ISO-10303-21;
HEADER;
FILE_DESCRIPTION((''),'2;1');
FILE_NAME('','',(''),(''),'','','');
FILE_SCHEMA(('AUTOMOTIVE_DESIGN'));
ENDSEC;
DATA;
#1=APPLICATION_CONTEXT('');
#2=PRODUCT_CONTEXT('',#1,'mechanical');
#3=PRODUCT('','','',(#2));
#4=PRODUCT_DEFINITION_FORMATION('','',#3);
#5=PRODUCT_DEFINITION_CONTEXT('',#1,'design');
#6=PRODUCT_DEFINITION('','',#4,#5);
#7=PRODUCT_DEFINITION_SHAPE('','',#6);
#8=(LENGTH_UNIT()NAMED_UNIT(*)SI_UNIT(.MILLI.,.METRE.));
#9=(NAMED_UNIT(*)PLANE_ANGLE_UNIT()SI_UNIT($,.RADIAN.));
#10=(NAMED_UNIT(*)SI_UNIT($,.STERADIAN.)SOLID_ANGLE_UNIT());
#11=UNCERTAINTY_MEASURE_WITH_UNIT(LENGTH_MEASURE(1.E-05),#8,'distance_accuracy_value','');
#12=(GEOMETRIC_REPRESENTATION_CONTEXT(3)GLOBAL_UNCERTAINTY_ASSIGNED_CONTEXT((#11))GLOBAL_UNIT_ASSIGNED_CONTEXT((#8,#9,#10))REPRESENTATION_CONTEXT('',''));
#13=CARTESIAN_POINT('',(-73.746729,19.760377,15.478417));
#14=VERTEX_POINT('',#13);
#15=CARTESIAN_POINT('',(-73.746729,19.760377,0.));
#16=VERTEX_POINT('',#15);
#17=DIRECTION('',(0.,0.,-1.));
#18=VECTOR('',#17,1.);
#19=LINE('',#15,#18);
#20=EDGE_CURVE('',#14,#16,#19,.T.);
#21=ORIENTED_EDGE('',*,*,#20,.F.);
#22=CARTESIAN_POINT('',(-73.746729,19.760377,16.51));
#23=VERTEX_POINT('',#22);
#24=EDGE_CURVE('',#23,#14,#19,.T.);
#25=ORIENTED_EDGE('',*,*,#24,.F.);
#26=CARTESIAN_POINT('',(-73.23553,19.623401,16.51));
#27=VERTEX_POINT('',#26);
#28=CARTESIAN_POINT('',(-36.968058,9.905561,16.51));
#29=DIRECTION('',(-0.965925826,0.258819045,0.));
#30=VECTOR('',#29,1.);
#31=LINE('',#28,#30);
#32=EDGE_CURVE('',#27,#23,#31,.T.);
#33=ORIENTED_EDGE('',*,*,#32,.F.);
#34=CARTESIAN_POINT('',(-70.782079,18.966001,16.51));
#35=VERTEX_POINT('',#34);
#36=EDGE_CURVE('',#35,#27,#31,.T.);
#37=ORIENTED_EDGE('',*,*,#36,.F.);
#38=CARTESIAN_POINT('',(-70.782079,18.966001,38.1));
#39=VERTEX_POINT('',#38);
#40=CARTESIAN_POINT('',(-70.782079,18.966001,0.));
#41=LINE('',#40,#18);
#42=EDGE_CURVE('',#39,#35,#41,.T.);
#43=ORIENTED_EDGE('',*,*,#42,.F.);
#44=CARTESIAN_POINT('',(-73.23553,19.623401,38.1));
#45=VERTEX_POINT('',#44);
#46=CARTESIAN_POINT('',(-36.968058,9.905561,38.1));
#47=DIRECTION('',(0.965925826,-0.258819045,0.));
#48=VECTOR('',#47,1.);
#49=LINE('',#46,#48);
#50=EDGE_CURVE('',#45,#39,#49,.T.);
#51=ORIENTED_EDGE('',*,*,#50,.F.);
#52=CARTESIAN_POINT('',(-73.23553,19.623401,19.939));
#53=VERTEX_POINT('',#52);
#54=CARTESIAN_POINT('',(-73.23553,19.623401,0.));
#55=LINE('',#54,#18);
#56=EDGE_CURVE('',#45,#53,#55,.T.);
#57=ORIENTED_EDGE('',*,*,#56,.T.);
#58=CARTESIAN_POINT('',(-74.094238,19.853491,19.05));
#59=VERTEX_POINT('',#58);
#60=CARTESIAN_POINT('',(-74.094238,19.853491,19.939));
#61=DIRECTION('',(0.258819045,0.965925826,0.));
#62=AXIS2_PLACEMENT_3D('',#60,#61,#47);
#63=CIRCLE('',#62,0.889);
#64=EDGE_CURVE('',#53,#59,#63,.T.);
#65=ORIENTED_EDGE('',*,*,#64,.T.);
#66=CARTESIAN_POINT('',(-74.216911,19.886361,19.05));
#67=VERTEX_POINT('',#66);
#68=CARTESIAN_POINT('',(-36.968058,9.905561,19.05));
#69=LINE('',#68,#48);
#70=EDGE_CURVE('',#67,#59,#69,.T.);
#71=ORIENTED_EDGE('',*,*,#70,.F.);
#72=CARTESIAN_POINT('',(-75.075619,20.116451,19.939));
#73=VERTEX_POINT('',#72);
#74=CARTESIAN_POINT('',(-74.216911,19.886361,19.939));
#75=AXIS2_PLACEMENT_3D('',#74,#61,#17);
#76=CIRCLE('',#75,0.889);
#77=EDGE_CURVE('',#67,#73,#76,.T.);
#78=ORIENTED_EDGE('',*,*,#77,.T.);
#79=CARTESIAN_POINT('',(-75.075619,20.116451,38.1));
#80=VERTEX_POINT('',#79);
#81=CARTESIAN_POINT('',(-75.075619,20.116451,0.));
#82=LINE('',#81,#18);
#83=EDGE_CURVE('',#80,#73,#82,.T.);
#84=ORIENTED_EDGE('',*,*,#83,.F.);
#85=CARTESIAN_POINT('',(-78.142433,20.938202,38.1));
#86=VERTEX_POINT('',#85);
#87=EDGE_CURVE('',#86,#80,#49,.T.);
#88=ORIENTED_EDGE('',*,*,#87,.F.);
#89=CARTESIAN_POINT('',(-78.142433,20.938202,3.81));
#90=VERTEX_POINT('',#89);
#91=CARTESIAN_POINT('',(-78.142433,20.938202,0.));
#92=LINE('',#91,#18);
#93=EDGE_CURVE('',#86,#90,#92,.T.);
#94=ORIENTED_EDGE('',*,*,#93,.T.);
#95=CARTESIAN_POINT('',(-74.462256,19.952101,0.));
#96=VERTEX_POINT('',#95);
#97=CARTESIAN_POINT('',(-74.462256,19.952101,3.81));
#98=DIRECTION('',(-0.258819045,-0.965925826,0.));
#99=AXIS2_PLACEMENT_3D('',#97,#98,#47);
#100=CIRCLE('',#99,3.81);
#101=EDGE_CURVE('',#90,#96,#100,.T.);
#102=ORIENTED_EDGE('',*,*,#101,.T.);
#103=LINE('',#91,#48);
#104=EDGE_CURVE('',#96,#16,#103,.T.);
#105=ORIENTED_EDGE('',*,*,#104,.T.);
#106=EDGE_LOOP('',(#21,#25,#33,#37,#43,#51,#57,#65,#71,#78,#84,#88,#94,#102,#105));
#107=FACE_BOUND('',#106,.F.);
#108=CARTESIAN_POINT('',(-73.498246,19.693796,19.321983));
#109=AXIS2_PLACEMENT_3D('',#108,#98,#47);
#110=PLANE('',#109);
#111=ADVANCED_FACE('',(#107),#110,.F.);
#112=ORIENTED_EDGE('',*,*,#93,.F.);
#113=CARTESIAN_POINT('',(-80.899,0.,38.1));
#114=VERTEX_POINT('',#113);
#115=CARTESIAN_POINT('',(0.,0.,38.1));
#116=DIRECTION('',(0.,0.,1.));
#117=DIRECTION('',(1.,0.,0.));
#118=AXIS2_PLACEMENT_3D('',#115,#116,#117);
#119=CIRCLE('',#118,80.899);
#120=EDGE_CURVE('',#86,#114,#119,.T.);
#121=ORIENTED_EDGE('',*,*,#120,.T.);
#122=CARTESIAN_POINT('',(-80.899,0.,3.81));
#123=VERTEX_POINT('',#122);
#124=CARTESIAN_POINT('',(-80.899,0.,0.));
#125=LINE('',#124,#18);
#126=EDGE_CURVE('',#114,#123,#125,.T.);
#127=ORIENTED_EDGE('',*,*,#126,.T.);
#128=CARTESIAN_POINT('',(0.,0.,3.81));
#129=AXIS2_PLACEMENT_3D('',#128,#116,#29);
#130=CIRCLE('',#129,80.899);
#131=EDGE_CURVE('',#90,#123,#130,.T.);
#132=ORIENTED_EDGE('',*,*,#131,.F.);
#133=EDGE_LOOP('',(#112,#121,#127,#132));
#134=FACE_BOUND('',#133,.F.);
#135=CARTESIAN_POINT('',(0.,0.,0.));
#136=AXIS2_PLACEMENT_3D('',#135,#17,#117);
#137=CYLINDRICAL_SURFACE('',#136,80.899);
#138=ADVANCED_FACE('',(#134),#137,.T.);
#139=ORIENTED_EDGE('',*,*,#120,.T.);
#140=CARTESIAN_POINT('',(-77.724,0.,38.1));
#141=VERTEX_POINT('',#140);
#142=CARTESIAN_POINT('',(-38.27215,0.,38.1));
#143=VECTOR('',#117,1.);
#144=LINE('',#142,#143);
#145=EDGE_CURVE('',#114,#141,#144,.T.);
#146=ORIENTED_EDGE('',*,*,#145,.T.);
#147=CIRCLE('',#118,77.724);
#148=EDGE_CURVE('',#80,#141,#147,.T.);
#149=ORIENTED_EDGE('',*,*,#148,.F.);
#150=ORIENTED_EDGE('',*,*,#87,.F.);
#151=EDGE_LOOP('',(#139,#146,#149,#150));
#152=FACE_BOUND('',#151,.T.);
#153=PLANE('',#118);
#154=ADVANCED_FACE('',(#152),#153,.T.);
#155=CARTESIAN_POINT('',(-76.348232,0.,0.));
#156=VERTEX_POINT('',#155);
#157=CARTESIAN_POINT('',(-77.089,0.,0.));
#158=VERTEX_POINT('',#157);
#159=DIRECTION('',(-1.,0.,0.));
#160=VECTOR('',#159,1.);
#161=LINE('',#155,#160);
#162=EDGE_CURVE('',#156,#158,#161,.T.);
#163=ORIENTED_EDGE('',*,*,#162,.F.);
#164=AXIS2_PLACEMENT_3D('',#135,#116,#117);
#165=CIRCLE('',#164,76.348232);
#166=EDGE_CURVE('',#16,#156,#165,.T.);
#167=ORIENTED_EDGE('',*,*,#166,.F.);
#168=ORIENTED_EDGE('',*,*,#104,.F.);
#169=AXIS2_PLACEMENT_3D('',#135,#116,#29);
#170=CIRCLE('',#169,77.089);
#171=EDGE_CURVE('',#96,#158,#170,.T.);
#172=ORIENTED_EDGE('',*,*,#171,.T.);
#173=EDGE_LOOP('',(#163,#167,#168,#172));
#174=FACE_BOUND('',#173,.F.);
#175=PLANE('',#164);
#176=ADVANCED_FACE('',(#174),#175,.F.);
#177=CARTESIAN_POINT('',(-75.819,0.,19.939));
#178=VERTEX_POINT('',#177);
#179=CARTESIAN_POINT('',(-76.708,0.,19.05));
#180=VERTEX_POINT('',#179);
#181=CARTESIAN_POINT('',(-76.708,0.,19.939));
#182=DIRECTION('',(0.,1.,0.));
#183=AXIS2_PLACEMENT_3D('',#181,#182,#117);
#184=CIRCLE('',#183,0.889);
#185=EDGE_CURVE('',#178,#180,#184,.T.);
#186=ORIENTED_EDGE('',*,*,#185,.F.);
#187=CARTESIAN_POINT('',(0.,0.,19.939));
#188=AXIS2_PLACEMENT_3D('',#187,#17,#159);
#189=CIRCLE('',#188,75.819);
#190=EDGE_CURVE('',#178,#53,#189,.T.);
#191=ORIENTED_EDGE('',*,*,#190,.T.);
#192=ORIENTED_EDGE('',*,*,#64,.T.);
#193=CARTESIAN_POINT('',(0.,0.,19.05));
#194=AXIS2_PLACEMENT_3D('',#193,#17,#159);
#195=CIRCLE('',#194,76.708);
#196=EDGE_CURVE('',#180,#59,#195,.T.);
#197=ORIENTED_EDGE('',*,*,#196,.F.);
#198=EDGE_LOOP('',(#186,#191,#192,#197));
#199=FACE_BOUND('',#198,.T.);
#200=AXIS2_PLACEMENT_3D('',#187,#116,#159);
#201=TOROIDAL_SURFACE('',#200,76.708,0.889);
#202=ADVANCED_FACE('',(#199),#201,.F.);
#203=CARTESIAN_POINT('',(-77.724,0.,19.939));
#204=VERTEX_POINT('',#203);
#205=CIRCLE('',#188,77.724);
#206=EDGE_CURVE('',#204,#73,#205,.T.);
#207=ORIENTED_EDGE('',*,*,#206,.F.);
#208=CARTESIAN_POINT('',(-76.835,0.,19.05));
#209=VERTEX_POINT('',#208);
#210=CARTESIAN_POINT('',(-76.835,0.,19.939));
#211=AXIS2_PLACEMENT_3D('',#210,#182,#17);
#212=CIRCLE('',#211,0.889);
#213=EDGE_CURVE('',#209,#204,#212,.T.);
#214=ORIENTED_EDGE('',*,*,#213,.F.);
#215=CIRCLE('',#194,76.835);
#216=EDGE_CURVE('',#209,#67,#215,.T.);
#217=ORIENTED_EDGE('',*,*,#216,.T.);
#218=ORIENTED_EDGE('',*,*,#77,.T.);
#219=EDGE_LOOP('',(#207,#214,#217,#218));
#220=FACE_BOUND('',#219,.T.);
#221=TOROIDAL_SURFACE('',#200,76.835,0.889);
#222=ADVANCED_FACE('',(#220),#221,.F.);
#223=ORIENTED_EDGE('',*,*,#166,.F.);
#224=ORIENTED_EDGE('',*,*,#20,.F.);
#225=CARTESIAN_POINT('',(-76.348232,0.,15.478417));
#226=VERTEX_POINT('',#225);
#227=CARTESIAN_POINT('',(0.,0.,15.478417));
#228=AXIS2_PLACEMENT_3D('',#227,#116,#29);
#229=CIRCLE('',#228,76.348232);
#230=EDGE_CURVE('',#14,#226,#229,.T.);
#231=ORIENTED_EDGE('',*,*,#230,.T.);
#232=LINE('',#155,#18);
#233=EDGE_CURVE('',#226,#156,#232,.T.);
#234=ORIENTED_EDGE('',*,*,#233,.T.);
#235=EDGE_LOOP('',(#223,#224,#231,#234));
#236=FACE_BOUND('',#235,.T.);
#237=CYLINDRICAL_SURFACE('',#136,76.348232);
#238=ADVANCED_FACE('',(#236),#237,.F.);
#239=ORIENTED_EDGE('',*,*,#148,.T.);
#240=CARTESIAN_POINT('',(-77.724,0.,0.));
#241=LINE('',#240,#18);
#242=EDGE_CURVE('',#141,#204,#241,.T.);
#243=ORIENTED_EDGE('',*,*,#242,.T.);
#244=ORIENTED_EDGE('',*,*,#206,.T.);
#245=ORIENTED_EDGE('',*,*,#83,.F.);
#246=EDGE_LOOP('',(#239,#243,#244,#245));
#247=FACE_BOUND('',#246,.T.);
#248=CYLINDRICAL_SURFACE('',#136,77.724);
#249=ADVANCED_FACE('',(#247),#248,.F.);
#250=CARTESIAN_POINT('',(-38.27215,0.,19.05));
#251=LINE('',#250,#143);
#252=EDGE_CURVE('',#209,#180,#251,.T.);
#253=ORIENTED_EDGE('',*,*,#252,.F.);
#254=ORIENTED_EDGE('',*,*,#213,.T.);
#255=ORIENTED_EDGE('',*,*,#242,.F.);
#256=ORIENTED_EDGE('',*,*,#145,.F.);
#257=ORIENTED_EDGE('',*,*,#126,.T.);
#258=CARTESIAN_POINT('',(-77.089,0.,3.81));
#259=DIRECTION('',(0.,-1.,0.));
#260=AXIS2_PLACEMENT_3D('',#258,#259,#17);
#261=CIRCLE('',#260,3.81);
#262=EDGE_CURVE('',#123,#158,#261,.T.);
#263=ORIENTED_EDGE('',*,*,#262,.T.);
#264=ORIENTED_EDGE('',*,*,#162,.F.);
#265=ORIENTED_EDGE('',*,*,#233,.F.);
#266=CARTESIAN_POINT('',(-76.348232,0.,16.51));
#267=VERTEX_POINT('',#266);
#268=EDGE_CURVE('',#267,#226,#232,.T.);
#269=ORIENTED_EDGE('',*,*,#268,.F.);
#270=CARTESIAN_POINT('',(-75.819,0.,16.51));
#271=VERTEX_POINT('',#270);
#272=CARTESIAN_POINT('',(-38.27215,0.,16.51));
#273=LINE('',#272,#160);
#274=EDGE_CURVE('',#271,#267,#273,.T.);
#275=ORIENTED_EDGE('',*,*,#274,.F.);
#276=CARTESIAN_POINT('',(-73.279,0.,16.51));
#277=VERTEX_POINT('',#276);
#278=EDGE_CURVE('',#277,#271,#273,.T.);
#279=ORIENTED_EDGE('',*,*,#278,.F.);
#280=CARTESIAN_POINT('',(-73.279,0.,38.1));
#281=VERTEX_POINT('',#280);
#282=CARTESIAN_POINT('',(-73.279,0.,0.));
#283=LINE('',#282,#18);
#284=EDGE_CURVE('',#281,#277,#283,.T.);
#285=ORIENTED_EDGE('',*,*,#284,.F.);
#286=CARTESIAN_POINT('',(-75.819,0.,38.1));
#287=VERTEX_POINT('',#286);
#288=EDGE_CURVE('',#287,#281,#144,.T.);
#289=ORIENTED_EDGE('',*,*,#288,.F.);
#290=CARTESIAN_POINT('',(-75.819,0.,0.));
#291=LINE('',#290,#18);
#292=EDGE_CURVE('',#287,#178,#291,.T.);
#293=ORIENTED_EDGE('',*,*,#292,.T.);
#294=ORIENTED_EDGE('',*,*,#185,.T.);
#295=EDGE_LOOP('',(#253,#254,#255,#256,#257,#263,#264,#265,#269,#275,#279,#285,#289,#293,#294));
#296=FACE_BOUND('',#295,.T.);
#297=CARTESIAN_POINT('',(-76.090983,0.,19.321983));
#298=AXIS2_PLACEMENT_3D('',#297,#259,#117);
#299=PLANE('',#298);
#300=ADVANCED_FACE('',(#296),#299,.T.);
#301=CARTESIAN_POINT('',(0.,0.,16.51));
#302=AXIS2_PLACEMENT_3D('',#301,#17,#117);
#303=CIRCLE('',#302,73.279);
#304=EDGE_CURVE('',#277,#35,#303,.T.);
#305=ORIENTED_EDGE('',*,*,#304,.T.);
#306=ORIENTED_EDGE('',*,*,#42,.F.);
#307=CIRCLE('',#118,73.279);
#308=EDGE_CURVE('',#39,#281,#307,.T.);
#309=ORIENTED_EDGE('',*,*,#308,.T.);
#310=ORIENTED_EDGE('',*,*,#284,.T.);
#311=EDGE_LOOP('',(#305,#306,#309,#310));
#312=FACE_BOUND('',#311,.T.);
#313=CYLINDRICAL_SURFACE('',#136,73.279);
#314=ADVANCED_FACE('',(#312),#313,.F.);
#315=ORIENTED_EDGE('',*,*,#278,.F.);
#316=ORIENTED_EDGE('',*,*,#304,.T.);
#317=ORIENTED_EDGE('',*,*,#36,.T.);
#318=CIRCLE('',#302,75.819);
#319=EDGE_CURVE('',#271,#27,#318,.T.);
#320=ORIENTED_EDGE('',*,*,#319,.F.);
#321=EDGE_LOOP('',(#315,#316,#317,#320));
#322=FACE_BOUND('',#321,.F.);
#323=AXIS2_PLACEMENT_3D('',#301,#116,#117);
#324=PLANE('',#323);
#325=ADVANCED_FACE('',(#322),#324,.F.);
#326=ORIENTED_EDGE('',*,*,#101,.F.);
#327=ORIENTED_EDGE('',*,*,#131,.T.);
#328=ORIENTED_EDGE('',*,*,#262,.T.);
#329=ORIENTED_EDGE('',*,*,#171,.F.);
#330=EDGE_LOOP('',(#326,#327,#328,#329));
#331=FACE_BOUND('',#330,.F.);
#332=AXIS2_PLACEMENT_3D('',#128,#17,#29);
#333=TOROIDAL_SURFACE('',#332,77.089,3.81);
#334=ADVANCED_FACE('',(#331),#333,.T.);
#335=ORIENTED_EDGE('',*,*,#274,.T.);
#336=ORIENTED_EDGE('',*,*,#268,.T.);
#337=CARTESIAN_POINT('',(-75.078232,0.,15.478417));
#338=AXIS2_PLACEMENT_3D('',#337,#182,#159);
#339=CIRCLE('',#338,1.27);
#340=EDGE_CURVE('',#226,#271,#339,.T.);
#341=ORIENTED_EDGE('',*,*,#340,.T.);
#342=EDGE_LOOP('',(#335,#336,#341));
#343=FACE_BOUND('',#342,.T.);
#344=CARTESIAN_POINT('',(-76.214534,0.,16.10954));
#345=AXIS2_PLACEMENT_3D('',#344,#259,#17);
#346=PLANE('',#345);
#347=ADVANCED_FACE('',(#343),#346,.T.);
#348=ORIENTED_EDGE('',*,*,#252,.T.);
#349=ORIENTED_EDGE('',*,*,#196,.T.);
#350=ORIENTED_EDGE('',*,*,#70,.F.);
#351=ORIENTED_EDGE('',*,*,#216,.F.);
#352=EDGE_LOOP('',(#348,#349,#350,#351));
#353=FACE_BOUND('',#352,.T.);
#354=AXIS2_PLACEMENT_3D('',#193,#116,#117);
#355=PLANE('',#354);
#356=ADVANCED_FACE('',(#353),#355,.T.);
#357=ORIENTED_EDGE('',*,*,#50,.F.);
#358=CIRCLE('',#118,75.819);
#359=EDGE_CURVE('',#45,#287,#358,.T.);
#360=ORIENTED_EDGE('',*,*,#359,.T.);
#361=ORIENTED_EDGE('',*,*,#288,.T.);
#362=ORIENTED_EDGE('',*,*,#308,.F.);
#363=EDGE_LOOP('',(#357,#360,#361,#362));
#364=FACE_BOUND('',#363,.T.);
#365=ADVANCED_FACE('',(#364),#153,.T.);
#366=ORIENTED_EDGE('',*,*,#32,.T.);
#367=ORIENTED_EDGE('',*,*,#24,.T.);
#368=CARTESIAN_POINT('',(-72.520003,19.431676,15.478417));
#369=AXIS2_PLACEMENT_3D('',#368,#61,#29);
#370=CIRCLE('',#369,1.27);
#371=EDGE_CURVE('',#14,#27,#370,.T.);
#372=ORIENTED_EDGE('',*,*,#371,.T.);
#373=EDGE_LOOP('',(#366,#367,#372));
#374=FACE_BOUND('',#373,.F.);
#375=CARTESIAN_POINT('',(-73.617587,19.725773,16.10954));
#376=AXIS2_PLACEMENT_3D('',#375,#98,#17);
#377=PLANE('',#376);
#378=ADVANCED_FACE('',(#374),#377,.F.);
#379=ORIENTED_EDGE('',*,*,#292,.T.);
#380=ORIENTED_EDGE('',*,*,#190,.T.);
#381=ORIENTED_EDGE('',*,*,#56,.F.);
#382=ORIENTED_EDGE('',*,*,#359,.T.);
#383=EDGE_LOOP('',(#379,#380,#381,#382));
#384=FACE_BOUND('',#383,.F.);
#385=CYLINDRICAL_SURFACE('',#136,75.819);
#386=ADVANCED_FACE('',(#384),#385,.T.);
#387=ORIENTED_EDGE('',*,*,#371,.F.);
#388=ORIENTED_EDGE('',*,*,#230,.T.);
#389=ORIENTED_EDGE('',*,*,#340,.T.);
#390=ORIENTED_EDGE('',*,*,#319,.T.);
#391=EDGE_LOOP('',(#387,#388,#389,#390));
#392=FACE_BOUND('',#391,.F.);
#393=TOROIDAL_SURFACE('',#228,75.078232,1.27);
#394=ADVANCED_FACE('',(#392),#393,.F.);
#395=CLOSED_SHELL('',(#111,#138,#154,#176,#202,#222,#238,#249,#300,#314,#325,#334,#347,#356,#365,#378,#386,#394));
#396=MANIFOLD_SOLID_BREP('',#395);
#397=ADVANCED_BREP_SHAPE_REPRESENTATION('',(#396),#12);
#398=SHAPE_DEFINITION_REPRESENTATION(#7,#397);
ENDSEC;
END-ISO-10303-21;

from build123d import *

# Parameters (mm, degrees)
F0_R        = 80.899
F0_R_2      = 77.724
F1_DEPTH    = 38.1
F0_R_3      = 75.819
F0_R_4      = 73.279
F2_DEPTH    = 19.05
F3_W        = 22.7063447237
F3_H        = 49.682635814
F4_ANGLE    = 15
F5_R        = 76.3482321919
F6_DEPTH    = 16.51
F7_T2_ANGLE = 15
F9_ANGLE    = 15
F10_R       = 3.81


# Not quite as in the source:
# - a fillet or chamfer that OpenCascade refuses, or shapes differently, is made with other operations: its cross-section is extruded or revolved along the edge and cut away or added


with BuildPart() as f1:
    # F0 (on Top) → F1 (new body)
    with BuildSketch(Plane.XY):
        Circle(F0_R)
        Circle(F0_R_2, mode=Mode.SUBTRACT)
    extrude(amount=F1_DEPTH)


with BuildPart() as f1b:
    # F0 (on Top) → F1, piece 2 (new body)
    with BuildSketch(Plane.XY):
        Circle(F0_R_3)
        Circle(F0_R_4, mode=Mode.SUBTRACT)
    extrude(amount=F1_DEPTH)


with BuildPart() as f2:
    # F0 (on Top) → F2 (new body)
    with BuildSketch(Plane.XY):
        Circle(F0_R_2)
        Circle(F0_R_3, mode=Mode.SUBTRACT)
    extrude(amount=F2_DEPTH)


with BuildPart() as f4_tool:
    # F3 (on Front) → F4 (revolve)
    with BuildSketch(Plane.XZ):
        with Locations((-76.5442997217, 24.841317907)):
            Rectangle(F3_W, F3_H)
    revolve(axis=Axis((0, 0, 38.7800522149), (0, 0, -1)), revolution_arc=F4_ANGLE)


with BuildPart() as f1_1:
    add(f1.part)

    # F4: intersect by f4_tool
    add(f4_tool.part, mode=Mode.INTERSECT)



with BuildPart() as f1b_1:
    add(f1b.part)

    # F4: intersect by f4_tool
    add(f4_tool.part, mode=Mode.INTERSECT)


with BuildPart() as f2_1:
    add(f2.part)

    # F4: intersect by f4_tool
    add(f4_tool.part, mode=Mode.INTERSECT)


with BuildPart() as f6_tool:
    # F5 (on Top) → F6 (new body)
    with BuildSketch(Plane.XY):
        Circle(F5_R)
    extrude(amount=F6_DEPTH)


with BuildPart() as f1b_2:
    add(f1b_1.part)

    # F6: cut by f6_tool
    add(f6_tool.part, mode=Mode.SUBTRACT)


with BuildPart() as f2_2:
    add(f2_1.part)

    # F6: cut by f6_tool
    add(f6_tool.part, mode=Mode.SUBTRACT)

    # F7: fillet of radius 1.27 on 1 edges, made by hand

    # F7_s1 → F7_t2 (revolve)
    with BuildSketch(Plane(origin=(0, 0, 0), x_dir=(0, 0, 1), z_dir=(0.2588190451, 0.9659258263, 0))):
        with BuildLine():
            ThreePointArc((15.4784172091, -76.3482321919), (16.0581261377, -76.2082045624), (16.51, -75.819))
            Line((16.51, -75.819), (16.51, -76.3482321919))
            Line((16.51, -76.3482321919), (15.4784172091, -76.3482321919))
        make_face()
    revolve(axis=Axis((0, 0, 16.51), (0, 0, 1)), revolution_arc=F7_T2_ANGLE)


with BuildPart() as f1_2:
    add(f1_1.part)

    add(f1b_2.part)  # F9 merges F1b

    add(f2_2.part)  # F9 merges F2
    # F8 (on Front) → F9 (revolve)
    with BuildSketch(Plane.XZ):
        with BuildLine():
            ThreePointArc((-75.819, 19.939), (-76.0793820715, 19.3103820715), (-76.708, 19.05))
            Line((-76.708, 19.05), (-75.819, 19.05))
            Line((-75.819, 19.05), (-75.819, 19.939))
        make_face()
        with BuildLine():
            ThreePointArc((-76.835, 19.05), (-77.4636179285, 19.3103820715), (-77.724, 19.939))
            Line((-77.724, 19.939), (-77.724, 19.05))
            Line((-77.724, 19.05), (-76.835, 19.05))
        make_face()
    revolve(axis=Axis((0, 0, 38.7800522149), (0, 0, -1)), revolution_arc=F9_ANGLE)

    # F10
    f10_edges = [f1_2.edges().sort_by_distance(p)[0] for p in [
        (-80.206898, 10.559438, 0),
    ]]
    fillet(f10_edges, radius=F10_R)


solid = f1_2.part
